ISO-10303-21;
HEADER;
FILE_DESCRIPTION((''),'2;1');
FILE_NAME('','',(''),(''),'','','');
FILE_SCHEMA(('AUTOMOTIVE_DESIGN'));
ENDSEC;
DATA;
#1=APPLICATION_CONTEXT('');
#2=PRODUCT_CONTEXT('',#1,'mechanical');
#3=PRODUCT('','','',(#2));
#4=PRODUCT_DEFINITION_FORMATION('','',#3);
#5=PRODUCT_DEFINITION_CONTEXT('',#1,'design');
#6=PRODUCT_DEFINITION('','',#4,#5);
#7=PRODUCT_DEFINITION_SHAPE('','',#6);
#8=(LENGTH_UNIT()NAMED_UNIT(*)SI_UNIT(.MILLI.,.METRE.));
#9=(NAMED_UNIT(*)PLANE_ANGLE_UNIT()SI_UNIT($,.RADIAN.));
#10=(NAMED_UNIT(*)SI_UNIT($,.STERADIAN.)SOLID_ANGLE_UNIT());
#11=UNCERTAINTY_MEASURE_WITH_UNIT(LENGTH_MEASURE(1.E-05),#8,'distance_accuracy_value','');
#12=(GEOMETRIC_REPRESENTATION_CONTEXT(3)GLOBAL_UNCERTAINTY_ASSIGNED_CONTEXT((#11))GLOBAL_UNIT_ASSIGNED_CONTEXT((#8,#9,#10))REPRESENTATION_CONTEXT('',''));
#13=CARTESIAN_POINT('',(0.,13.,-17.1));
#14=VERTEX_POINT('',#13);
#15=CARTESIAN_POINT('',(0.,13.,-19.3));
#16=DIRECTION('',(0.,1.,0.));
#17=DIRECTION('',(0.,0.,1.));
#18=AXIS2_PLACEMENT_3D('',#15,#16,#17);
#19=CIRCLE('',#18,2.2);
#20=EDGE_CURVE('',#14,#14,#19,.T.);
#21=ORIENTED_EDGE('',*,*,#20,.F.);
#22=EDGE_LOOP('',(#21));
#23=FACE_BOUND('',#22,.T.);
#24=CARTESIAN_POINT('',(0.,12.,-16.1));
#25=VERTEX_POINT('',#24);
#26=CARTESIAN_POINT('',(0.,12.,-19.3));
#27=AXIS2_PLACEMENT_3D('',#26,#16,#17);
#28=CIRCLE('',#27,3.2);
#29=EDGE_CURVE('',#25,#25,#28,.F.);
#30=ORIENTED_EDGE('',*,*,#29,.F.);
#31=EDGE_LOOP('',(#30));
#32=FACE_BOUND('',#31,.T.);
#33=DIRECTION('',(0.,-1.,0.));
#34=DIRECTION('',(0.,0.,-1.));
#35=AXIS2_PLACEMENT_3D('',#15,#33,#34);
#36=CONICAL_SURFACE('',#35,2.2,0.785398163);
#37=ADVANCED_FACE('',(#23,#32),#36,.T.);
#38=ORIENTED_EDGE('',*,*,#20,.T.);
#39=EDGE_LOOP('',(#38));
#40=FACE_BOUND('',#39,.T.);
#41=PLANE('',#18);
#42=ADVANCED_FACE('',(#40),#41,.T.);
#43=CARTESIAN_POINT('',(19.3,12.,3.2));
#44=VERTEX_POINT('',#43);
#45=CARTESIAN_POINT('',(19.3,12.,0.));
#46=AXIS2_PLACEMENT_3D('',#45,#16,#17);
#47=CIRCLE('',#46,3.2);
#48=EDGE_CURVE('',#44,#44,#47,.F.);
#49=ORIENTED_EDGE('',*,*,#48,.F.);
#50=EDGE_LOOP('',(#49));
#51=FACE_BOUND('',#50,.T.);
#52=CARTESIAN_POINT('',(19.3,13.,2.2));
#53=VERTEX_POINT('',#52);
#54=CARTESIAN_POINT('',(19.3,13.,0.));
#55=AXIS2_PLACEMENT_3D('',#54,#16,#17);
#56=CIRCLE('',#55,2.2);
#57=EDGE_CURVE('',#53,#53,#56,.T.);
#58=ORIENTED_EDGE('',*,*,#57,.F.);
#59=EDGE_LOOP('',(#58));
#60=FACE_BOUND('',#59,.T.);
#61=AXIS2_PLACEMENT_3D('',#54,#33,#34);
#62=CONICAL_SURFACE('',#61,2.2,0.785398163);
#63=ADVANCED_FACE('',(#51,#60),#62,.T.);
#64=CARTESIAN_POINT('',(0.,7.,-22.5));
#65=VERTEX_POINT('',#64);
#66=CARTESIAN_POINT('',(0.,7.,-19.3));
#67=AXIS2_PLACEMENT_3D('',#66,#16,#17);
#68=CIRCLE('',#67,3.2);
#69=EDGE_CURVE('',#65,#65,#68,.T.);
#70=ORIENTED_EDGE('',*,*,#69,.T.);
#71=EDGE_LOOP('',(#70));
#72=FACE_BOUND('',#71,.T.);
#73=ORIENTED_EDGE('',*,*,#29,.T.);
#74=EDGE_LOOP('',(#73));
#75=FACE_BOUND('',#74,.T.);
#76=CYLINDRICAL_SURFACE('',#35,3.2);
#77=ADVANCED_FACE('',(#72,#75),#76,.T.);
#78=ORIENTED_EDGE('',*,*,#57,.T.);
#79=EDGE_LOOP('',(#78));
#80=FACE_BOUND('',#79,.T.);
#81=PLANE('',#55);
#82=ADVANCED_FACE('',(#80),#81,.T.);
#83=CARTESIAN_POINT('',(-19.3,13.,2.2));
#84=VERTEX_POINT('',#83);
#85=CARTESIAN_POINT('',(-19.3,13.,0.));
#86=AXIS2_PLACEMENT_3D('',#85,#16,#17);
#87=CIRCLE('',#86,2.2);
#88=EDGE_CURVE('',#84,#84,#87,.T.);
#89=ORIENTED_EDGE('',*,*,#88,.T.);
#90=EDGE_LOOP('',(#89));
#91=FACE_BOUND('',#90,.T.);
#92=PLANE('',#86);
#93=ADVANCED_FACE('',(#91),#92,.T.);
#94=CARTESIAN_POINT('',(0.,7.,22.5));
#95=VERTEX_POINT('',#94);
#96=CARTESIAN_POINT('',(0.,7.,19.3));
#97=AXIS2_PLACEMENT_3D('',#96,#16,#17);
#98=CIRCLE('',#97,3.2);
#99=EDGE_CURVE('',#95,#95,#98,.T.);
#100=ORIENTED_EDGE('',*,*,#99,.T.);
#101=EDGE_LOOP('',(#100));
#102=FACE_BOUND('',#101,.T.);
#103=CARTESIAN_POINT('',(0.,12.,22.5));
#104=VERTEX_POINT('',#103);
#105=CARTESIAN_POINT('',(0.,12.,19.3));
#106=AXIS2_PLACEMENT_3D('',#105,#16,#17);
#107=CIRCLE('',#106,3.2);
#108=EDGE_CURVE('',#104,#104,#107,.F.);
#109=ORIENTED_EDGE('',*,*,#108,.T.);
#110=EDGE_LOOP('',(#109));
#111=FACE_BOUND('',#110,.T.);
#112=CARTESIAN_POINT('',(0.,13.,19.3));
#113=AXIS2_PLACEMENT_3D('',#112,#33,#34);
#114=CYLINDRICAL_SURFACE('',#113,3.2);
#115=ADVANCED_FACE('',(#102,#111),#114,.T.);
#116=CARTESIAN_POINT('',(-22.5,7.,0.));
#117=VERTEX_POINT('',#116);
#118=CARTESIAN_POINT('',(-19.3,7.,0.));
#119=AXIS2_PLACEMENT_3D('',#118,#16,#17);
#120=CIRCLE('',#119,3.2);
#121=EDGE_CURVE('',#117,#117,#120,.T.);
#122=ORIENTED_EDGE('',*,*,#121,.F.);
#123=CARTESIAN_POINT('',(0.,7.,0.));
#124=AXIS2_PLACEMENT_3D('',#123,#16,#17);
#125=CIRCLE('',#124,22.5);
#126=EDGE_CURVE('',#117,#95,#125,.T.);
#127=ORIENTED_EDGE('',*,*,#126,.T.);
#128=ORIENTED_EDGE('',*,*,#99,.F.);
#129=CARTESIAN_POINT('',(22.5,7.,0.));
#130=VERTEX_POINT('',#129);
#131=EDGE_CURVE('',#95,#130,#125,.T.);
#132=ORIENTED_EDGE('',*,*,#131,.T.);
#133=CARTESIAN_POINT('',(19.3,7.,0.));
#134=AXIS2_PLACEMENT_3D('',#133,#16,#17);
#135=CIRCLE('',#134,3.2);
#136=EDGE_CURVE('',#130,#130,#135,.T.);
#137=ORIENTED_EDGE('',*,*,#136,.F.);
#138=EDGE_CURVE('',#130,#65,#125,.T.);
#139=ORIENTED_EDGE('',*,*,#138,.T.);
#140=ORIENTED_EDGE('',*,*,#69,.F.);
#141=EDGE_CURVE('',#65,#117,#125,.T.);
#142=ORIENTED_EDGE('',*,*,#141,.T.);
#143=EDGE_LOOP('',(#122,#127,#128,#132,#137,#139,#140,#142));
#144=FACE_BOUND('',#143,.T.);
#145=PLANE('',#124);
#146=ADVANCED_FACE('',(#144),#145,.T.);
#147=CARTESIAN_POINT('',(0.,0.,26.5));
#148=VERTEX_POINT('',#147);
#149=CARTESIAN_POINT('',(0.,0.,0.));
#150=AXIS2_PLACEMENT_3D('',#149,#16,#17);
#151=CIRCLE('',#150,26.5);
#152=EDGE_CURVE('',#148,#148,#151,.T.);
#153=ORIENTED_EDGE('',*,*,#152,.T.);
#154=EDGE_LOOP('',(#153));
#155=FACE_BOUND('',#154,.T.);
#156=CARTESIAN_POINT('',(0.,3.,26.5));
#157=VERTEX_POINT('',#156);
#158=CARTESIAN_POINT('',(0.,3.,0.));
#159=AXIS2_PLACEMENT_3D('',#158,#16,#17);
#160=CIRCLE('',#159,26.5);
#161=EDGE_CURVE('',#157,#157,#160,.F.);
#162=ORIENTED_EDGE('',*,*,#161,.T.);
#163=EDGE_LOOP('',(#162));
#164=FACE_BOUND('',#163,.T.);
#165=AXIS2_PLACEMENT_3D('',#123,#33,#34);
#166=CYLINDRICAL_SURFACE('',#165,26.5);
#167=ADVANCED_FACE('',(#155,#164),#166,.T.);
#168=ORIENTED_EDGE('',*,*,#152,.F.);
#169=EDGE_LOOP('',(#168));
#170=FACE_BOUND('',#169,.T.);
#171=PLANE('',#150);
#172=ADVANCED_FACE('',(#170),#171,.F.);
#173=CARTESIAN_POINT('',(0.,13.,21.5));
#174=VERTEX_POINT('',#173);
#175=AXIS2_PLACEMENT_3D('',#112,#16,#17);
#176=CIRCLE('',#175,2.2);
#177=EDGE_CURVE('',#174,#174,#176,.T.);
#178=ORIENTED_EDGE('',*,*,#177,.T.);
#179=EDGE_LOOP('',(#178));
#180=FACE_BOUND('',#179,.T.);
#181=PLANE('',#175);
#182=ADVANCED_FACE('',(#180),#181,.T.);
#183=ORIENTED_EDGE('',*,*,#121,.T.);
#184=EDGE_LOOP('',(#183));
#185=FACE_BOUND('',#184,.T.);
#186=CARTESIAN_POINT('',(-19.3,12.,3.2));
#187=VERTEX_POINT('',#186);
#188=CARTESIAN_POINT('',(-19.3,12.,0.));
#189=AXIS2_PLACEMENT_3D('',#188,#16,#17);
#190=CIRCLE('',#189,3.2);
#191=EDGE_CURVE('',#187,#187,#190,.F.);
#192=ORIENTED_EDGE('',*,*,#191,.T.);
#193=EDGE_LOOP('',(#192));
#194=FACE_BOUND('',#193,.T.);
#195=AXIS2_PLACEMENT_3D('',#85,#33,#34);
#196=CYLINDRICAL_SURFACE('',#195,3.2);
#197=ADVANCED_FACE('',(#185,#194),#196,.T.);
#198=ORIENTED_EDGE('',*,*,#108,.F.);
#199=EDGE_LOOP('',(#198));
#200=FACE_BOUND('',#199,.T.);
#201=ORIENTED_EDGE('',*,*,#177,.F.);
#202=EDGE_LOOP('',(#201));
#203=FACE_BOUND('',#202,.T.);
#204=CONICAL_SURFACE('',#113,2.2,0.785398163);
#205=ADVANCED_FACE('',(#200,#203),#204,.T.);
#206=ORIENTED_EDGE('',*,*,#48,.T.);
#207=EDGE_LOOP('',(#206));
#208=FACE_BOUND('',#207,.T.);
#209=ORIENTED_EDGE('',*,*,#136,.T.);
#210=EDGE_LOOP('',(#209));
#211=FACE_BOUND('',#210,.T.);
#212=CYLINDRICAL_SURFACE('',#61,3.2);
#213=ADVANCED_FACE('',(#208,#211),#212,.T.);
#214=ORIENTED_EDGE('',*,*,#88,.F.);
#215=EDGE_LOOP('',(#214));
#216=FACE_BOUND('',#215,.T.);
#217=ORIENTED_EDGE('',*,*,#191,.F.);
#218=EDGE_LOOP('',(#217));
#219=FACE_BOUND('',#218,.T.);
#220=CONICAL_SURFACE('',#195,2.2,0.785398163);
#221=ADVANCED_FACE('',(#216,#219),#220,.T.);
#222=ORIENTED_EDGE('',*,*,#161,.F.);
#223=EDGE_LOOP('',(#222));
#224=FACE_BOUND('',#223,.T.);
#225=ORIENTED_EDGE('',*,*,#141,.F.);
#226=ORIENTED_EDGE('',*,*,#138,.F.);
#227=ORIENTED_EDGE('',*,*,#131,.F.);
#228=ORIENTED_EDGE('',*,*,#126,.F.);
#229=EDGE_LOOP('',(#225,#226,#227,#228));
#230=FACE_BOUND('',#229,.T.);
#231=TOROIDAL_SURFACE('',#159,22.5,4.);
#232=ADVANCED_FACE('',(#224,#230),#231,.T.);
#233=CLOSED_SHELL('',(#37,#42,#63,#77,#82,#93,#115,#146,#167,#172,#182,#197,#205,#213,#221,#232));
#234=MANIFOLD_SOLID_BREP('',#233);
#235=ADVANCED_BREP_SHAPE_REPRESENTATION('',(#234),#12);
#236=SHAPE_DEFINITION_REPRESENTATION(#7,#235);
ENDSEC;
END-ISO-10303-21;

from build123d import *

# Parameters (mm, degrees)
SKETCH1_R           = 26.5
BOSS_EXTRUDE1_DEPTH = 7
BOSS_EXTRUDE4_START = 7
SKETCH1_12_R        = 3.2
BOSS_EXTRUDE4_DEPTH = 6
FILLET1_R           = 4
CHAMFER1_SIZE       = 1
BOSS_EXTRUDE5_START = 7
SKETCH1_16_R        = 3.2
BOSS_EXTRUDE5_DEPTH = 6
BOSS_EXTRUDE6_START = 7
SKETCH1_17_R        = 3.2
BOSS_EXTRUDE6_DEPTH = 6
CHAMFER2_SIZE       = 1


with BuildPart() as part:
    # Sketch1 → Boss-Extrude1 (new body)
    with BuildSketch(Plane(origin=(0, 0, 0), x_dir=(1, 0, 0), z_dir=(0, 1, 0))):
        with Locations(Location((0, 0, 0), (0, 0, 270))):
            Circle(SKETCH1_R)
    extrude(amount=BOSS_EXTRUDE1_DEPTH)

    # Sketch1<12> → Boss-Extrude4 (add)
    with BuildSketch(Plane(origin=(0, 0, 0), x_dir=(1, 0, 0), z_dir=(0, 1, 0)).offset(BOSS_EXTRUDE4_START)):
        with Locations(Location((19.3, 0, 0), (0, 0, 270))):
            Circle(SKETCH1_12_R)
        with Locations(Location((-19.3, 0, 0), (0, 0, 270))):
            Circle(SKETCH1_12_R)
    extrude(amount=BOSS_EXTRUDE4_DEPTH)

    # Fillet1
    fillet1_edges = [part.edges().sort_by_distance(p)[0] for p in [
        (0, 7, -26.5),
    ]]
    fillet(fillet1_edges, radius=FILLET1_R - 0.0001)  # a hair under: the kernel refuses the full size

    # Chamfer1
    chamfer1_edges = [part.edges().sort_by_distance(p)[0] for p in [
        (19.3, 13, -3.2),
        (-19.3, 13, -3.2),
    ]]
    chamfer(chamfer1_edges, length=CHAMFER1_SIZE)

    # Sketch1<16> → Boss-Extrude5 (add)
    with BuildSketch(Plane(origin=(0, 0, 0), x_dir=(1, 0, 0), z_dir=(0, 1, 0)).offset(BOSS_EXTRUDE5_START)):
        with Locations(Location((0, 19.3, 0), (0, 0, 89.999510926))):
            Circle(SKETCH1_16_R)
    extrude(amount=BOSS_EXTRUDE5_DEPTH)

    # Sketch1<17> → Boss-Extrude6 (add)
    with BuildSketch(Plane(origin=(0, 0, 0), x_dir=(1, 0, 0), z_dir=(0, 1, 0)).offset(BOSS_EXTRUDE6_START)):
        with Locations(Location((0, -19.3, 0), (0, 0, 269.999510926))):
            Circle(SKETCH1_17_R)
    extrude(amount=BOSS_EXTRUDE6_DEPTH)

    # Chamfer2
    chamfer2_edges = [part.edges().sort_by_distance(p)[0] for p in [
        (-2.7315e-05, 13, -16.1),
        (2.7315e-05, 13, 16.1),
    ]]
    chamfer(chamfer2_edges, length=CHAMFER2_SIZE)


solid = part.part
